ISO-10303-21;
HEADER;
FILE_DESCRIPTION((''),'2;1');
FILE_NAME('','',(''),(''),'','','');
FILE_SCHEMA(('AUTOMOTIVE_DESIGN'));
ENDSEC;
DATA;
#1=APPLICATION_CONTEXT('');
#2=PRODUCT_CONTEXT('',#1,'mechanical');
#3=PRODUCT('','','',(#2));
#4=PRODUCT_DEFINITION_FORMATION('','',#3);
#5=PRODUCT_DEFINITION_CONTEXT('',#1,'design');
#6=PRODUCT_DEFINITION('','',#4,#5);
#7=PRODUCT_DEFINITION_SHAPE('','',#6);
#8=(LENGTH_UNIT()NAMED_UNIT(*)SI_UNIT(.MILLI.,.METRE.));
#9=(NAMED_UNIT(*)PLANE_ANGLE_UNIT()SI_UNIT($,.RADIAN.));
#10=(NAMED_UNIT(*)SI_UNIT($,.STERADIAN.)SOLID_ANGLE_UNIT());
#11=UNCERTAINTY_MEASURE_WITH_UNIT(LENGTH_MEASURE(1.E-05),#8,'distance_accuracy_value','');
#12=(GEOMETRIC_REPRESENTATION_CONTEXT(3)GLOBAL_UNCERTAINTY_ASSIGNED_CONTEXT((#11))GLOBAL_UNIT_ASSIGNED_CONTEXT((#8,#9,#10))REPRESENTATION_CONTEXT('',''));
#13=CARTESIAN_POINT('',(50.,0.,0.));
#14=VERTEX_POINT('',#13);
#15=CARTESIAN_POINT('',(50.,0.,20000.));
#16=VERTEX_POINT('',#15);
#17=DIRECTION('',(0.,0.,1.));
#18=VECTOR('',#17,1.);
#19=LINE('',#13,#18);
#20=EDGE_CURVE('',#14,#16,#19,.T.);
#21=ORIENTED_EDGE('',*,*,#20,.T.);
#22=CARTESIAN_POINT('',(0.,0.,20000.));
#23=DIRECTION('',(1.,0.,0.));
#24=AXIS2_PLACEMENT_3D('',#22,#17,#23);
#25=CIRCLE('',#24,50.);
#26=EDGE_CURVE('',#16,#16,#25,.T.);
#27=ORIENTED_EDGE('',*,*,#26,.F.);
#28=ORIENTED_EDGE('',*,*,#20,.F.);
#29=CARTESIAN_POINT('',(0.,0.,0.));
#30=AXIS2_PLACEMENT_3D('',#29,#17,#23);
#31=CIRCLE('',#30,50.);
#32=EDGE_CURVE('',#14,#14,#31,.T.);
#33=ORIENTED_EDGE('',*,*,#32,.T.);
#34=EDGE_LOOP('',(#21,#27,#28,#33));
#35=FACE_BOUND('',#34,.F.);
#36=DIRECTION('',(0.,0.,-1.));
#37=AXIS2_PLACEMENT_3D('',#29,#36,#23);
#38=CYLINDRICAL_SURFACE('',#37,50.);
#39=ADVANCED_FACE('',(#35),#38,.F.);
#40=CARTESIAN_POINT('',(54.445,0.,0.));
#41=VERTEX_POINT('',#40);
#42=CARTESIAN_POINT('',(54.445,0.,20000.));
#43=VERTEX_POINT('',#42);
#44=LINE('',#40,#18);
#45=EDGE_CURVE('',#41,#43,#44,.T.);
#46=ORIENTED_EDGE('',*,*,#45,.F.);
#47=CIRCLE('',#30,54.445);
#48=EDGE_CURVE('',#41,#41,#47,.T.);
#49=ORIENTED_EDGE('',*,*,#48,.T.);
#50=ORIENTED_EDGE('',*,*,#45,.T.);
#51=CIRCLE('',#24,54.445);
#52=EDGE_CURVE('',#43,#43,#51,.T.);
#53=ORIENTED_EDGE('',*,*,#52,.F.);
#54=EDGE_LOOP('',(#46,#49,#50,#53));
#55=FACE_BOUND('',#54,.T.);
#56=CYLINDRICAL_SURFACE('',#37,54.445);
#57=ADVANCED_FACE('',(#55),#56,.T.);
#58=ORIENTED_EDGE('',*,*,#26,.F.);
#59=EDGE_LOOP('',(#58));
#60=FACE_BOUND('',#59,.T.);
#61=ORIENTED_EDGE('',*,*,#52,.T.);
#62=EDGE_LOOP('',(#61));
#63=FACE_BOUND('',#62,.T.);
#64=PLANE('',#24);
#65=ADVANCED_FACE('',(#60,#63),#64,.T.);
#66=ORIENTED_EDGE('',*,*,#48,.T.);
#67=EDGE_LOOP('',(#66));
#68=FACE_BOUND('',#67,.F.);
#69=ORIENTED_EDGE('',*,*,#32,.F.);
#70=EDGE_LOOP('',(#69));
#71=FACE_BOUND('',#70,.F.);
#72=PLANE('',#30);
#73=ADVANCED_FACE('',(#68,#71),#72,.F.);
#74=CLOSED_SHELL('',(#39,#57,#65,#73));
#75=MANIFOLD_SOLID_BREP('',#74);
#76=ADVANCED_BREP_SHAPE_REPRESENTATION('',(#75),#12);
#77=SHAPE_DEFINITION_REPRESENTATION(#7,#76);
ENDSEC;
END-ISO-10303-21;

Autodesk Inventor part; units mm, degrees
ref_plane "YZ Plane" through (0, 0, 0) normal (1, 0, 0) x (0, 1, 0)
ref_plane "XZ Plane" through (0, 0, 0) normal (0, 1, 0) x (-1, 0, 0)
ref_plane "XY Plane" through (0, 0, 0) normal (0, 0, 1) x (1, 0, 0)
sketch "Sketch1" plane through (0, 0, 0) normal (0, 0, 1) x (1, 0, 0)
  circle A0 centre (0, 0) radius 50
  circle A1 centre (0, 0) radius 54.445
  dimension "d0" = 100
  dimension "d1" = 4.445
extrude "Extrusion1" add sketch "Sketch1" along normal blind 20000
properties part number "pipe0.85m"
